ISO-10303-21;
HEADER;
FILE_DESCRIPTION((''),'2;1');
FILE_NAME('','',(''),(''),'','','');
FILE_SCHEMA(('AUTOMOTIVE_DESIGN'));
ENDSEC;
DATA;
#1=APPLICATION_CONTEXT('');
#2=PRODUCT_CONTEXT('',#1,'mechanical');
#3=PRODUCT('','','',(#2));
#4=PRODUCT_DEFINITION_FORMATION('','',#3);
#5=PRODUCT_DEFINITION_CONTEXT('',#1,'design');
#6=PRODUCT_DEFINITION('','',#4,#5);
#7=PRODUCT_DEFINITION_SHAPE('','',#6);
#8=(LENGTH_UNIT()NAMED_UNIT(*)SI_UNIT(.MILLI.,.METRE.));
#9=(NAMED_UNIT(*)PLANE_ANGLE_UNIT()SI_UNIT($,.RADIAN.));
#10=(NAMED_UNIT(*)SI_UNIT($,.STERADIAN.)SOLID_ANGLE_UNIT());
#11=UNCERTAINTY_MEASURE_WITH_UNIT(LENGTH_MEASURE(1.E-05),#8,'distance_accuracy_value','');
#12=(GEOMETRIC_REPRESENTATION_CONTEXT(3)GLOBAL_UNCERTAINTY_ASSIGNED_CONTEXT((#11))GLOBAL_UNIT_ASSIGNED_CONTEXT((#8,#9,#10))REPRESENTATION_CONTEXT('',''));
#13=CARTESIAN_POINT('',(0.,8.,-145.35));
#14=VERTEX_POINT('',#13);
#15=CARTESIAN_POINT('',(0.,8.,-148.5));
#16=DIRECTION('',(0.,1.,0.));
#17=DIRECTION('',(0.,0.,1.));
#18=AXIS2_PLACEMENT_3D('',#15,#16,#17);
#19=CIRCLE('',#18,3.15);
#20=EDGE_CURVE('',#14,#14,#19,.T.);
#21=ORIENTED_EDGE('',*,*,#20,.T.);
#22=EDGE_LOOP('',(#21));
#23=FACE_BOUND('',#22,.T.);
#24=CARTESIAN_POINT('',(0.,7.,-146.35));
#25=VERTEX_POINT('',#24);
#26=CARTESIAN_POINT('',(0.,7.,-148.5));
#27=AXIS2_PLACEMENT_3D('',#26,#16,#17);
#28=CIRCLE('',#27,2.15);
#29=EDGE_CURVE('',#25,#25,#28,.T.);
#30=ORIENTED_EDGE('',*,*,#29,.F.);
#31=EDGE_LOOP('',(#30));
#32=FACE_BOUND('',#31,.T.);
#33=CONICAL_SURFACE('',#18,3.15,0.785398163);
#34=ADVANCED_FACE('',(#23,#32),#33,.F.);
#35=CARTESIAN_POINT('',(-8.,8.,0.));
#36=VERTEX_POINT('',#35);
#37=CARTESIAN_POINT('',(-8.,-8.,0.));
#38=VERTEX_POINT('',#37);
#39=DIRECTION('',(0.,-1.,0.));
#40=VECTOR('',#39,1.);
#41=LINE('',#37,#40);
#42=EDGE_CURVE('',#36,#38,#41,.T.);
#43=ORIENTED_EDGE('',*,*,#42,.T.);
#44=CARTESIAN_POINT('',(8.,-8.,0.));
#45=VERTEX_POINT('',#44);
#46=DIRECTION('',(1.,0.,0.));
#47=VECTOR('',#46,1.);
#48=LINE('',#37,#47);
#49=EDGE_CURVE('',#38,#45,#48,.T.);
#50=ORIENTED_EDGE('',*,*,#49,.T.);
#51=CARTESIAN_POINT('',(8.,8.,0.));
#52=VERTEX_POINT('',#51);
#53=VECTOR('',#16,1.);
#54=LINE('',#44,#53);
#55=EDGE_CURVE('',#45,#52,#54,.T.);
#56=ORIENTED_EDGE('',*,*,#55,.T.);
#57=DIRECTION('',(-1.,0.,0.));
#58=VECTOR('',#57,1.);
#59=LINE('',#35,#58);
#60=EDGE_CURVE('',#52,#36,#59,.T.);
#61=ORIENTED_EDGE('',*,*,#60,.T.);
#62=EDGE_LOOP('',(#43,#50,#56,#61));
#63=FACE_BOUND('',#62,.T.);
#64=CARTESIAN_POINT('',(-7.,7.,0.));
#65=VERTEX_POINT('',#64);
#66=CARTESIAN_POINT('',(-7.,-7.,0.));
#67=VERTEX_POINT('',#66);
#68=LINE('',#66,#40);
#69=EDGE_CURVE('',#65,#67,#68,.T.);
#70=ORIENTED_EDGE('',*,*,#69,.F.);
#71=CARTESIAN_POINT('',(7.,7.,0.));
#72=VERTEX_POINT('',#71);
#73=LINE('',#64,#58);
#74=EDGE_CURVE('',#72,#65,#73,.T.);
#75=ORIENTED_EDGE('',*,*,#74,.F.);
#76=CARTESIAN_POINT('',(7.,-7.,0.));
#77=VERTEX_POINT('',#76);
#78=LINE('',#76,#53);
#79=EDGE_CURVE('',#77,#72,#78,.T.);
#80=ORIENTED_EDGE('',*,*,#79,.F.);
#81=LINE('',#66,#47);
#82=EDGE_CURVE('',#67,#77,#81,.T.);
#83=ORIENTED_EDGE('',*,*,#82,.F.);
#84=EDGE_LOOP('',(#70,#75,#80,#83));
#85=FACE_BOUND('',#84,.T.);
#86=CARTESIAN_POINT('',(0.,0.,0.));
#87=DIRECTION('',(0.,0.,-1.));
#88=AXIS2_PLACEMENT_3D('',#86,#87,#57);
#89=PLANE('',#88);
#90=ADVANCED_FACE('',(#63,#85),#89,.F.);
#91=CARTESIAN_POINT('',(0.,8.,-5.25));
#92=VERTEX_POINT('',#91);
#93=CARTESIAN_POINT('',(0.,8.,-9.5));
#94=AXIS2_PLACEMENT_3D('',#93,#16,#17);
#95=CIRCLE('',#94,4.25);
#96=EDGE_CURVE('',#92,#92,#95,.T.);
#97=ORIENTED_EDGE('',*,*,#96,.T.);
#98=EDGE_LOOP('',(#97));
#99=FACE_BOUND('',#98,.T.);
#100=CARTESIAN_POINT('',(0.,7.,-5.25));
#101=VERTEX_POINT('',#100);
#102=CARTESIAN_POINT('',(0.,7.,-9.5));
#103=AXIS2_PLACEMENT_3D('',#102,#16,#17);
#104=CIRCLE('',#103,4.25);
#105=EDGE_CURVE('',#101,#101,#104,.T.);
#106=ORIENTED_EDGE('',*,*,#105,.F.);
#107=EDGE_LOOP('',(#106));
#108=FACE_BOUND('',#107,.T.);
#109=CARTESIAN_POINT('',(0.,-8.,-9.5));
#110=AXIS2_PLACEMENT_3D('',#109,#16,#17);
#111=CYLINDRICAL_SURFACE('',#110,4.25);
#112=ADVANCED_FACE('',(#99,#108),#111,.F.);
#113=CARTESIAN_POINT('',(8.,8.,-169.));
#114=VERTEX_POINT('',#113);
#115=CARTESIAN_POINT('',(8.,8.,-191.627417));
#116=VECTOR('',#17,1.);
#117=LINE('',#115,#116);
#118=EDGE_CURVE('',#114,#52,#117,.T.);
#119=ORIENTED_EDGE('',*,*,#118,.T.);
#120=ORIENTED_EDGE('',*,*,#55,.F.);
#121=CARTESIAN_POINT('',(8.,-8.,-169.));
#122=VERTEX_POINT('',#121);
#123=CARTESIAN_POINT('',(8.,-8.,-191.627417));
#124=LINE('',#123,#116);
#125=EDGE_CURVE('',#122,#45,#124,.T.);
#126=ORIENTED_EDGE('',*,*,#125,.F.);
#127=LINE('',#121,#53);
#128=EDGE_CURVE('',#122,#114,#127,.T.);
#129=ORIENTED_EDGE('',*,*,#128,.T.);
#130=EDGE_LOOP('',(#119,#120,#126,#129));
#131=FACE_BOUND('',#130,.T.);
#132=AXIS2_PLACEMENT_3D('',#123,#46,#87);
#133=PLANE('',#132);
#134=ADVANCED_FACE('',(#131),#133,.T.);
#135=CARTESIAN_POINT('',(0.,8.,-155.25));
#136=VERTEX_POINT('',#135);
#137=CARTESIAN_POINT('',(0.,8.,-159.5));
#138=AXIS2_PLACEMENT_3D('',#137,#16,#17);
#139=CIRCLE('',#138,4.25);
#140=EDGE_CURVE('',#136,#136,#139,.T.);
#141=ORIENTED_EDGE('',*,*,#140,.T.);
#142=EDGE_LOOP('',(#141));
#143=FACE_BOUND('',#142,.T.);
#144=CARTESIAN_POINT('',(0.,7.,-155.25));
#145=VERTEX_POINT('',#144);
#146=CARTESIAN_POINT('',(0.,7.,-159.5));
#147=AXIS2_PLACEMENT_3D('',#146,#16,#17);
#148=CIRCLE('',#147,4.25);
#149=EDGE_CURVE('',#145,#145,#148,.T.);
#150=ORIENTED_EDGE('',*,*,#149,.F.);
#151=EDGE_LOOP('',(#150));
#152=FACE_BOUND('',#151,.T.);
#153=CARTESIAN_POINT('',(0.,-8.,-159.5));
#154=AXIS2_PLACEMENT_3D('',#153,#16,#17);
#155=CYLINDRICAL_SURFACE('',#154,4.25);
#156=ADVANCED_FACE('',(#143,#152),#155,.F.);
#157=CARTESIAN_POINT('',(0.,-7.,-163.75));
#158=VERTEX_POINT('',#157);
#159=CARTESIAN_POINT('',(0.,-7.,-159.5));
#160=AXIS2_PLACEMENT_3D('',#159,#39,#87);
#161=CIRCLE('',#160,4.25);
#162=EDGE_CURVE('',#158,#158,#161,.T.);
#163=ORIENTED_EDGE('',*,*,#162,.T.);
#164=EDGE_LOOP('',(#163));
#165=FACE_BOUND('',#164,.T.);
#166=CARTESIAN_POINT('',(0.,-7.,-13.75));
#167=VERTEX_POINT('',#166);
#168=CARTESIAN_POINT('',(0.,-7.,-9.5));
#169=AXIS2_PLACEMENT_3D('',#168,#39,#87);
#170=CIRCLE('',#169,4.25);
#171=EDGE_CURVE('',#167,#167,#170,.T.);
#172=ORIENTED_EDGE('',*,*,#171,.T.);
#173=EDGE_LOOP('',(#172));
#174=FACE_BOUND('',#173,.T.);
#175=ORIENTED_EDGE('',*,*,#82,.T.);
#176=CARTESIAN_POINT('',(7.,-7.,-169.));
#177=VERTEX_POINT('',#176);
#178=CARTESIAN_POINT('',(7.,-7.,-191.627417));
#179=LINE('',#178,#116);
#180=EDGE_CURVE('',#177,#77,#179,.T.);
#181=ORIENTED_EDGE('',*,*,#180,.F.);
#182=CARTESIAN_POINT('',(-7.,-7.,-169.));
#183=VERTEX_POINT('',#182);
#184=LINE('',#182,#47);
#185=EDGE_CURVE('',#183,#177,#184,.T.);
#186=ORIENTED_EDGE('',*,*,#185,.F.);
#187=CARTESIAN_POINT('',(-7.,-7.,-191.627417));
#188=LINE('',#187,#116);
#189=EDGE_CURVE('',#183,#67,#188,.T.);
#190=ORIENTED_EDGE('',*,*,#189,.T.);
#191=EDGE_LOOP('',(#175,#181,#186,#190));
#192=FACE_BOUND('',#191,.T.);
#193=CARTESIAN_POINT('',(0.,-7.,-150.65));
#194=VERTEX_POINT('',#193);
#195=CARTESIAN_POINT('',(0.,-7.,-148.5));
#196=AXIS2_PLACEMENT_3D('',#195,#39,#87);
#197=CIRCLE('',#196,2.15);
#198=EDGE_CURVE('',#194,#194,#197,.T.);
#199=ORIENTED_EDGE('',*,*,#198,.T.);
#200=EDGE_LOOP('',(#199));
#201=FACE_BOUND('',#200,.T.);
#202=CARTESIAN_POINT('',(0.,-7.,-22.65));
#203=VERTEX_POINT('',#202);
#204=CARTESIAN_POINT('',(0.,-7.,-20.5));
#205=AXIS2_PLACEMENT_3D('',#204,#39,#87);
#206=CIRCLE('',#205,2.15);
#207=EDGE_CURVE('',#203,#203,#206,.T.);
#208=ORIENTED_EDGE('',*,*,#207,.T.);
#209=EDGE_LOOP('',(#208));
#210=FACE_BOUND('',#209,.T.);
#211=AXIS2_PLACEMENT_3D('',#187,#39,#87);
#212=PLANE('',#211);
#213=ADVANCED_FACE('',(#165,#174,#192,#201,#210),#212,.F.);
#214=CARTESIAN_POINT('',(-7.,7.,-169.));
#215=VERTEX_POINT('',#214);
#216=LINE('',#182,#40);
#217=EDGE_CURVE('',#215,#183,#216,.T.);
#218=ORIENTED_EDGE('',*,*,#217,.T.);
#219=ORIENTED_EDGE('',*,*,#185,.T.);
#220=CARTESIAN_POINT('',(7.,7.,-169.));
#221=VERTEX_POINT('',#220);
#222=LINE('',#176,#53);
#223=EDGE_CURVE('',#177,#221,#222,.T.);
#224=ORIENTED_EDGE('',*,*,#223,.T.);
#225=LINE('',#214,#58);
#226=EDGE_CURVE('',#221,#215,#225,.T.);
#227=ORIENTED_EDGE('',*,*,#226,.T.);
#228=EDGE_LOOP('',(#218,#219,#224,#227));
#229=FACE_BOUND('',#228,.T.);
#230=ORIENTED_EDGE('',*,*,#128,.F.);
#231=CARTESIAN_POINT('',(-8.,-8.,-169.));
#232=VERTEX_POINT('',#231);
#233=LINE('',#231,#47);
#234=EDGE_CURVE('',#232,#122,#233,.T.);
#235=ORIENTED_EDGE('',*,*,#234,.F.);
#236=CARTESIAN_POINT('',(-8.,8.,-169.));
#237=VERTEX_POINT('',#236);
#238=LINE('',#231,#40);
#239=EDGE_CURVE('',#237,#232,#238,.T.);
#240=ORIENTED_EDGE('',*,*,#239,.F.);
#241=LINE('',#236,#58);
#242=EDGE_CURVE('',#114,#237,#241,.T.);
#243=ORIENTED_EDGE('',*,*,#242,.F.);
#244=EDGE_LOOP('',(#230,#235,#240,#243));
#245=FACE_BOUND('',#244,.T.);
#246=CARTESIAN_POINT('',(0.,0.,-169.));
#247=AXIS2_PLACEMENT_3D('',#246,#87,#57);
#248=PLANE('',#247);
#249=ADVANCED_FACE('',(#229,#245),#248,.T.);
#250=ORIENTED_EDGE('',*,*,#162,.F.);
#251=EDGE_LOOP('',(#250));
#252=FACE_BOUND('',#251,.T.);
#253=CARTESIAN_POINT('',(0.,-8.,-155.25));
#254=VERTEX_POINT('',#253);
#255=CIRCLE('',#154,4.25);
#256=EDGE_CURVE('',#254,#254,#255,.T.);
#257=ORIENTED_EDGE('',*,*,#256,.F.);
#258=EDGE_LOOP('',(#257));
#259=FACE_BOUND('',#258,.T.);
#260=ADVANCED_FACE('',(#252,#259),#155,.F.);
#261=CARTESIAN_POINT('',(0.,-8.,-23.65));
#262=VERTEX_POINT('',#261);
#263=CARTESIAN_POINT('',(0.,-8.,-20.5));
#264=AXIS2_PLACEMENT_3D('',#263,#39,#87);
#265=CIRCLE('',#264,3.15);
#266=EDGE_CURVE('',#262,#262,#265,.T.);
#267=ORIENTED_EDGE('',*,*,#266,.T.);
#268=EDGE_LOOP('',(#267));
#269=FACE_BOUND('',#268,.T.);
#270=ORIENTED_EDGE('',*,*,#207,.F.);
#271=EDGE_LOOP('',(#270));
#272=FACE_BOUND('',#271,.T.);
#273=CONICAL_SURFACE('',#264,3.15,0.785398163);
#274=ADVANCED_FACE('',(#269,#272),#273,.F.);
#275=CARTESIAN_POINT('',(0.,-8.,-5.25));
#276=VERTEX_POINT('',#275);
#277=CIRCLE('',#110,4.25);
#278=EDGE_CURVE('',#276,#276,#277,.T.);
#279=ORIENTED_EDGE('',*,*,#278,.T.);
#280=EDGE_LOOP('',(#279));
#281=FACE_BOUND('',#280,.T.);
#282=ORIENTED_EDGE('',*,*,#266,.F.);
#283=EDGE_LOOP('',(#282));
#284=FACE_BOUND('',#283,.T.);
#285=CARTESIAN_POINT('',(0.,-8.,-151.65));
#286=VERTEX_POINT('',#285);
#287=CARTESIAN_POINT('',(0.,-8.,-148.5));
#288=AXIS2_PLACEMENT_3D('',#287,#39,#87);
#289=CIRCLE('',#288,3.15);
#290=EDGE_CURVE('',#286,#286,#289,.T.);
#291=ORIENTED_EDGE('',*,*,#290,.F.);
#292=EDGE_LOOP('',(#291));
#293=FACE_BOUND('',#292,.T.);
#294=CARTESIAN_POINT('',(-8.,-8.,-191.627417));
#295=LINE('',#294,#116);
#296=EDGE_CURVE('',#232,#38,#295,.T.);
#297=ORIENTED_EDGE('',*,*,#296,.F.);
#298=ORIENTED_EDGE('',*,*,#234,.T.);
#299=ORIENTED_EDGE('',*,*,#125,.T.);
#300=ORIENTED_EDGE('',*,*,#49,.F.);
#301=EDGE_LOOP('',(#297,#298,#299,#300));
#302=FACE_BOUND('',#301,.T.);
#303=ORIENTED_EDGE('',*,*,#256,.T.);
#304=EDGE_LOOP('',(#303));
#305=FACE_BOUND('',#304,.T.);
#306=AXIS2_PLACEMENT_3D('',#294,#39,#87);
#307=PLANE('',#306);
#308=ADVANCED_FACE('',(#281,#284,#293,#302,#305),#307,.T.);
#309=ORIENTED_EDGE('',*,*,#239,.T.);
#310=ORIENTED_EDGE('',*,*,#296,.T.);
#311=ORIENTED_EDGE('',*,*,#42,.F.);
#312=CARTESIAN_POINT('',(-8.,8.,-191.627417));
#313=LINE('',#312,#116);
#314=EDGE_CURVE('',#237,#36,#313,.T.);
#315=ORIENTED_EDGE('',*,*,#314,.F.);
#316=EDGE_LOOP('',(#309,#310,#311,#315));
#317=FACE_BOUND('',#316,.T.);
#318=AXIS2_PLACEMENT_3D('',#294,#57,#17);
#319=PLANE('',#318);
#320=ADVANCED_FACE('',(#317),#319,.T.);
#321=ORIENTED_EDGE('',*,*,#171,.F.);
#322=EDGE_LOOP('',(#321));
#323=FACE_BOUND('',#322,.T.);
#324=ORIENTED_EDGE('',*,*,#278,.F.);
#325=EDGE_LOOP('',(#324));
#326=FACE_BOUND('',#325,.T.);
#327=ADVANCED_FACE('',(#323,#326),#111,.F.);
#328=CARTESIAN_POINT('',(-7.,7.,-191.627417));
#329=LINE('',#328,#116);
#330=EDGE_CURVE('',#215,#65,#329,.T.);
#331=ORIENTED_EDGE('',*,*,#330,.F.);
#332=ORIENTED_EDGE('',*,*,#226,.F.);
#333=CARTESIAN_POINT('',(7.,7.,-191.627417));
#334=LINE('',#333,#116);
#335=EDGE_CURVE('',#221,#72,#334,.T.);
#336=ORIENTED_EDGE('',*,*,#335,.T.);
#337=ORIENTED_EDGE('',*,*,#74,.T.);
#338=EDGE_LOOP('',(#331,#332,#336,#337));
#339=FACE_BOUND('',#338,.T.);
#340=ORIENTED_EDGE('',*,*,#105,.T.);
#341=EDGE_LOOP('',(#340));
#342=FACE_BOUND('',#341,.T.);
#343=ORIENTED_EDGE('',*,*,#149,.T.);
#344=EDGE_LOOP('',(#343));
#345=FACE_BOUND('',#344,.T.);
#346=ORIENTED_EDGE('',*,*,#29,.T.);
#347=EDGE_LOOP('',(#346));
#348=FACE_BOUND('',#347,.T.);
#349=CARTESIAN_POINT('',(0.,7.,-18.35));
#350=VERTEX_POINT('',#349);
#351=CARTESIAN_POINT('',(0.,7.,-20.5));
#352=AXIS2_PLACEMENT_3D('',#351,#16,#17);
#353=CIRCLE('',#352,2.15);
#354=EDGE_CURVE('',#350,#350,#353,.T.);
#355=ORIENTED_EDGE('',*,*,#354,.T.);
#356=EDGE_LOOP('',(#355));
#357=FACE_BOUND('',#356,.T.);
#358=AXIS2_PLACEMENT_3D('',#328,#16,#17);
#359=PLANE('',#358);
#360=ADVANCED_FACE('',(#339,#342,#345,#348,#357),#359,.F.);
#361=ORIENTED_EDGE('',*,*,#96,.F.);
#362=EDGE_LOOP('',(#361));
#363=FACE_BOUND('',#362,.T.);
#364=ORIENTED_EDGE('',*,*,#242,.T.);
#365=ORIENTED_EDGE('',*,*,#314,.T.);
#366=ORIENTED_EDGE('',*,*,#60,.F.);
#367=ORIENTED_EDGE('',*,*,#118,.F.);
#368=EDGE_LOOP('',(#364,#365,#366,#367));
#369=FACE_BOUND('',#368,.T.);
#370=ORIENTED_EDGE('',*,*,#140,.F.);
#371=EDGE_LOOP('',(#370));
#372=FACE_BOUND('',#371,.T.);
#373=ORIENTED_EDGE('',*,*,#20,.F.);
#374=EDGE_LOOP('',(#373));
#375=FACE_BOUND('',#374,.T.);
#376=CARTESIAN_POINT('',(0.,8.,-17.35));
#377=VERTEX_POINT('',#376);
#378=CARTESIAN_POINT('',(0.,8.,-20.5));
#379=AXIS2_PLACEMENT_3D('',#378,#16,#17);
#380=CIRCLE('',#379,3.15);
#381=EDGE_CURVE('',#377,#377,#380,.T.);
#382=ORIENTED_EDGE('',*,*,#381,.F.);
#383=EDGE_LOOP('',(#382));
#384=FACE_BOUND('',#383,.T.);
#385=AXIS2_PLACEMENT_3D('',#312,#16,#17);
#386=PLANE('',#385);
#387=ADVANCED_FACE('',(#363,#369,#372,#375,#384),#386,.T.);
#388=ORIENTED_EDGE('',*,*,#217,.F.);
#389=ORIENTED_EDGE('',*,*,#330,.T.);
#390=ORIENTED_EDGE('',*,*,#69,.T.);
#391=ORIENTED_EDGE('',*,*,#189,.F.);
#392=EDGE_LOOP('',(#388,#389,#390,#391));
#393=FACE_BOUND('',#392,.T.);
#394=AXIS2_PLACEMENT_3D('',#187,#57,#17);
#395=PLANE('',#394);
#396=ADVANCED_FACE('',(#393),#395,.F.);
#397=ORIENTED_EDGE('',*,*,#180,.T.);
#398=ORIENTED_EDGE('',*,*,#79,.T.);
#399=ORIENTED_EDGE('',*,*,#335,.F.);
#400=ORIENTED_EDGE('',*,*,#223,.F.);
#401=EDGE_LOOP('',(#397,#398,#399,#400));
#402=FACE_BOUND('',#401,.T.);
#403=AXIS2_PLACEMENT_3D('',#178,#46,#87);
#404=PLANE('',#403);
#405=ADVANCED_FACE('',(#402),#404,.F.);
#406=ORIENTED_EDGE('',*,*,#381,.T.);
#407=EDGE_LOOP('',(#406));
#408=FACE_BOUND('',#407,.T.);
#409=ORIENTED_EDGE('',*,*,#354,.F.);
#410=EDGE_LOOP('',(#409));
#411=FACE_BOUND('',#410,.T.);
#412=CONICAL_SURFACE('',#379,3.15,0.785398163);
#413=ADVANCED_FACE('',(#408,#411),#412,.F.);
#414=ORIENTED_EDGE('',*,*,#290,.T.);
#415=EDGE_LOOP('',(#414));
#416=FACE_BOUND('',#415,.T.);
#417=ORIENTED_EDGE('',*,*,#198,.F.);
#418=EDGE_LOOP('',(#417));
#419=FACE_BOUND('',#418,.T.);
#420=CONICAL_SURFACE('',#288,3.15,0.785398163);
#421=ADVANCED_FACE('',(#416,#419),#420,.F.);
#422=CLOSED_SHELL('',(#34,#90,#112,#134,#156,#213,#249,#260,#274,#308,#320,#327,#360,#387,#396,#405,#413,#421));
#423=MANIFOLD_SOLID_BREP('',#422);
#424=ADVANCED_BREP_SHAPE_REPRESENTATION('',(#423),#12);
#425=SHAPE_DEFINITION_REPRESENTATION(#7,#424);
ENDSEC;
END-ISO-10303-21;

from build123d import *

# Parameters (mm, degrees)
SKETCH1_W           = 16
SKETCH1_H           = 16
SKETCH1_W_2         = 14
SKETCH1_H_2         = 14
BOSS_EXTRUDE1_DEPTH = 169
SKETCH2_R           = 4.25
SKETCH2_R_2         = 1.5
CUT_EXTRUDE1_DEPTH  = 170.944108459


# Read off the part's stored shape, not the designer's step: CSK for M3 Flat Head Machine Screw1
with BuildPart() as part:
    # Sketch1 → Boss-Extrude1 (new body)
    with BuildSketch(Plane.XY):
        Rectangle(SKETCH1_W, SKETCH1_H)
        Rectangle(SKETCH1_W_2, SKETCH1_H_2, mode=Mode.SUBTRACT)
    extrude(amount=-BOSS_EXTRUDE1_DEPTH)

    # Sketch2 → Cut-Extrude1 (cut, through all)
    with BuildSketch(Plane(origin=(0, 8, 0), x_dir=(1, 0, 0), z_dir=(0, 1, 0))):
        with Locations(Location((0, 159.5, 0), (0, 0, 270))):
            Circle(SKETCH2_R)
        with Locations(Location((0, 9.5, 0), (0, 0, 270))):
            Circle(SKETCH2_R)
        with Locations(Location((0, 20.5, 0), (0, 0, 270))):
            Circle(SKETCH2_R_2)
        with Locations(Location((0, 148.5, 0), (0, 0, 270))):
            Circle(SKETCH2_R_2)
    extrude(amount=-CUT_EXTRUDE1_DEPTH, mode=Mode.SUBTRACT)

    # CSK for M3 Flat Head Machine Screw1 outl → CSK for M3 Flat Head Machine Screw1 (revolve, cut)
    with BuildSketch(Plane.XY.offset(-148.5)):
        Polygon((1.5, -8), (3.15, -8), (2.15, -7), (1.5, -7), align=None)
        Polygon((3.15, 8), (1.5, 8), (1.5, 7), (2.15, 7), align=None)
    revolve(axis=Axis((0, 0, -148.5), (0, 1, 0)), mode=Mode.SUBTRACT)

    # CSK for M3 Flat Head Machine Screw1 2 ou → CSK for M3 Flat Head Machine Screw1 2 (revolve, cut)
    with BuildSketch(Plane.XY.offset(-20.5)):
        Polygon((1.5, -8), (3.15, -8), (2.15, -7), (1.5, -7), align=None)
        Polygon((3.15, 8), (1.5, 8), (1.5, 7), (2.15, 7), align=None)
    revolve(axis=Axis((0, 0, -20.5), (0, 1, 0)), mode=Mode.SUBTRACT)


solid = part.part
